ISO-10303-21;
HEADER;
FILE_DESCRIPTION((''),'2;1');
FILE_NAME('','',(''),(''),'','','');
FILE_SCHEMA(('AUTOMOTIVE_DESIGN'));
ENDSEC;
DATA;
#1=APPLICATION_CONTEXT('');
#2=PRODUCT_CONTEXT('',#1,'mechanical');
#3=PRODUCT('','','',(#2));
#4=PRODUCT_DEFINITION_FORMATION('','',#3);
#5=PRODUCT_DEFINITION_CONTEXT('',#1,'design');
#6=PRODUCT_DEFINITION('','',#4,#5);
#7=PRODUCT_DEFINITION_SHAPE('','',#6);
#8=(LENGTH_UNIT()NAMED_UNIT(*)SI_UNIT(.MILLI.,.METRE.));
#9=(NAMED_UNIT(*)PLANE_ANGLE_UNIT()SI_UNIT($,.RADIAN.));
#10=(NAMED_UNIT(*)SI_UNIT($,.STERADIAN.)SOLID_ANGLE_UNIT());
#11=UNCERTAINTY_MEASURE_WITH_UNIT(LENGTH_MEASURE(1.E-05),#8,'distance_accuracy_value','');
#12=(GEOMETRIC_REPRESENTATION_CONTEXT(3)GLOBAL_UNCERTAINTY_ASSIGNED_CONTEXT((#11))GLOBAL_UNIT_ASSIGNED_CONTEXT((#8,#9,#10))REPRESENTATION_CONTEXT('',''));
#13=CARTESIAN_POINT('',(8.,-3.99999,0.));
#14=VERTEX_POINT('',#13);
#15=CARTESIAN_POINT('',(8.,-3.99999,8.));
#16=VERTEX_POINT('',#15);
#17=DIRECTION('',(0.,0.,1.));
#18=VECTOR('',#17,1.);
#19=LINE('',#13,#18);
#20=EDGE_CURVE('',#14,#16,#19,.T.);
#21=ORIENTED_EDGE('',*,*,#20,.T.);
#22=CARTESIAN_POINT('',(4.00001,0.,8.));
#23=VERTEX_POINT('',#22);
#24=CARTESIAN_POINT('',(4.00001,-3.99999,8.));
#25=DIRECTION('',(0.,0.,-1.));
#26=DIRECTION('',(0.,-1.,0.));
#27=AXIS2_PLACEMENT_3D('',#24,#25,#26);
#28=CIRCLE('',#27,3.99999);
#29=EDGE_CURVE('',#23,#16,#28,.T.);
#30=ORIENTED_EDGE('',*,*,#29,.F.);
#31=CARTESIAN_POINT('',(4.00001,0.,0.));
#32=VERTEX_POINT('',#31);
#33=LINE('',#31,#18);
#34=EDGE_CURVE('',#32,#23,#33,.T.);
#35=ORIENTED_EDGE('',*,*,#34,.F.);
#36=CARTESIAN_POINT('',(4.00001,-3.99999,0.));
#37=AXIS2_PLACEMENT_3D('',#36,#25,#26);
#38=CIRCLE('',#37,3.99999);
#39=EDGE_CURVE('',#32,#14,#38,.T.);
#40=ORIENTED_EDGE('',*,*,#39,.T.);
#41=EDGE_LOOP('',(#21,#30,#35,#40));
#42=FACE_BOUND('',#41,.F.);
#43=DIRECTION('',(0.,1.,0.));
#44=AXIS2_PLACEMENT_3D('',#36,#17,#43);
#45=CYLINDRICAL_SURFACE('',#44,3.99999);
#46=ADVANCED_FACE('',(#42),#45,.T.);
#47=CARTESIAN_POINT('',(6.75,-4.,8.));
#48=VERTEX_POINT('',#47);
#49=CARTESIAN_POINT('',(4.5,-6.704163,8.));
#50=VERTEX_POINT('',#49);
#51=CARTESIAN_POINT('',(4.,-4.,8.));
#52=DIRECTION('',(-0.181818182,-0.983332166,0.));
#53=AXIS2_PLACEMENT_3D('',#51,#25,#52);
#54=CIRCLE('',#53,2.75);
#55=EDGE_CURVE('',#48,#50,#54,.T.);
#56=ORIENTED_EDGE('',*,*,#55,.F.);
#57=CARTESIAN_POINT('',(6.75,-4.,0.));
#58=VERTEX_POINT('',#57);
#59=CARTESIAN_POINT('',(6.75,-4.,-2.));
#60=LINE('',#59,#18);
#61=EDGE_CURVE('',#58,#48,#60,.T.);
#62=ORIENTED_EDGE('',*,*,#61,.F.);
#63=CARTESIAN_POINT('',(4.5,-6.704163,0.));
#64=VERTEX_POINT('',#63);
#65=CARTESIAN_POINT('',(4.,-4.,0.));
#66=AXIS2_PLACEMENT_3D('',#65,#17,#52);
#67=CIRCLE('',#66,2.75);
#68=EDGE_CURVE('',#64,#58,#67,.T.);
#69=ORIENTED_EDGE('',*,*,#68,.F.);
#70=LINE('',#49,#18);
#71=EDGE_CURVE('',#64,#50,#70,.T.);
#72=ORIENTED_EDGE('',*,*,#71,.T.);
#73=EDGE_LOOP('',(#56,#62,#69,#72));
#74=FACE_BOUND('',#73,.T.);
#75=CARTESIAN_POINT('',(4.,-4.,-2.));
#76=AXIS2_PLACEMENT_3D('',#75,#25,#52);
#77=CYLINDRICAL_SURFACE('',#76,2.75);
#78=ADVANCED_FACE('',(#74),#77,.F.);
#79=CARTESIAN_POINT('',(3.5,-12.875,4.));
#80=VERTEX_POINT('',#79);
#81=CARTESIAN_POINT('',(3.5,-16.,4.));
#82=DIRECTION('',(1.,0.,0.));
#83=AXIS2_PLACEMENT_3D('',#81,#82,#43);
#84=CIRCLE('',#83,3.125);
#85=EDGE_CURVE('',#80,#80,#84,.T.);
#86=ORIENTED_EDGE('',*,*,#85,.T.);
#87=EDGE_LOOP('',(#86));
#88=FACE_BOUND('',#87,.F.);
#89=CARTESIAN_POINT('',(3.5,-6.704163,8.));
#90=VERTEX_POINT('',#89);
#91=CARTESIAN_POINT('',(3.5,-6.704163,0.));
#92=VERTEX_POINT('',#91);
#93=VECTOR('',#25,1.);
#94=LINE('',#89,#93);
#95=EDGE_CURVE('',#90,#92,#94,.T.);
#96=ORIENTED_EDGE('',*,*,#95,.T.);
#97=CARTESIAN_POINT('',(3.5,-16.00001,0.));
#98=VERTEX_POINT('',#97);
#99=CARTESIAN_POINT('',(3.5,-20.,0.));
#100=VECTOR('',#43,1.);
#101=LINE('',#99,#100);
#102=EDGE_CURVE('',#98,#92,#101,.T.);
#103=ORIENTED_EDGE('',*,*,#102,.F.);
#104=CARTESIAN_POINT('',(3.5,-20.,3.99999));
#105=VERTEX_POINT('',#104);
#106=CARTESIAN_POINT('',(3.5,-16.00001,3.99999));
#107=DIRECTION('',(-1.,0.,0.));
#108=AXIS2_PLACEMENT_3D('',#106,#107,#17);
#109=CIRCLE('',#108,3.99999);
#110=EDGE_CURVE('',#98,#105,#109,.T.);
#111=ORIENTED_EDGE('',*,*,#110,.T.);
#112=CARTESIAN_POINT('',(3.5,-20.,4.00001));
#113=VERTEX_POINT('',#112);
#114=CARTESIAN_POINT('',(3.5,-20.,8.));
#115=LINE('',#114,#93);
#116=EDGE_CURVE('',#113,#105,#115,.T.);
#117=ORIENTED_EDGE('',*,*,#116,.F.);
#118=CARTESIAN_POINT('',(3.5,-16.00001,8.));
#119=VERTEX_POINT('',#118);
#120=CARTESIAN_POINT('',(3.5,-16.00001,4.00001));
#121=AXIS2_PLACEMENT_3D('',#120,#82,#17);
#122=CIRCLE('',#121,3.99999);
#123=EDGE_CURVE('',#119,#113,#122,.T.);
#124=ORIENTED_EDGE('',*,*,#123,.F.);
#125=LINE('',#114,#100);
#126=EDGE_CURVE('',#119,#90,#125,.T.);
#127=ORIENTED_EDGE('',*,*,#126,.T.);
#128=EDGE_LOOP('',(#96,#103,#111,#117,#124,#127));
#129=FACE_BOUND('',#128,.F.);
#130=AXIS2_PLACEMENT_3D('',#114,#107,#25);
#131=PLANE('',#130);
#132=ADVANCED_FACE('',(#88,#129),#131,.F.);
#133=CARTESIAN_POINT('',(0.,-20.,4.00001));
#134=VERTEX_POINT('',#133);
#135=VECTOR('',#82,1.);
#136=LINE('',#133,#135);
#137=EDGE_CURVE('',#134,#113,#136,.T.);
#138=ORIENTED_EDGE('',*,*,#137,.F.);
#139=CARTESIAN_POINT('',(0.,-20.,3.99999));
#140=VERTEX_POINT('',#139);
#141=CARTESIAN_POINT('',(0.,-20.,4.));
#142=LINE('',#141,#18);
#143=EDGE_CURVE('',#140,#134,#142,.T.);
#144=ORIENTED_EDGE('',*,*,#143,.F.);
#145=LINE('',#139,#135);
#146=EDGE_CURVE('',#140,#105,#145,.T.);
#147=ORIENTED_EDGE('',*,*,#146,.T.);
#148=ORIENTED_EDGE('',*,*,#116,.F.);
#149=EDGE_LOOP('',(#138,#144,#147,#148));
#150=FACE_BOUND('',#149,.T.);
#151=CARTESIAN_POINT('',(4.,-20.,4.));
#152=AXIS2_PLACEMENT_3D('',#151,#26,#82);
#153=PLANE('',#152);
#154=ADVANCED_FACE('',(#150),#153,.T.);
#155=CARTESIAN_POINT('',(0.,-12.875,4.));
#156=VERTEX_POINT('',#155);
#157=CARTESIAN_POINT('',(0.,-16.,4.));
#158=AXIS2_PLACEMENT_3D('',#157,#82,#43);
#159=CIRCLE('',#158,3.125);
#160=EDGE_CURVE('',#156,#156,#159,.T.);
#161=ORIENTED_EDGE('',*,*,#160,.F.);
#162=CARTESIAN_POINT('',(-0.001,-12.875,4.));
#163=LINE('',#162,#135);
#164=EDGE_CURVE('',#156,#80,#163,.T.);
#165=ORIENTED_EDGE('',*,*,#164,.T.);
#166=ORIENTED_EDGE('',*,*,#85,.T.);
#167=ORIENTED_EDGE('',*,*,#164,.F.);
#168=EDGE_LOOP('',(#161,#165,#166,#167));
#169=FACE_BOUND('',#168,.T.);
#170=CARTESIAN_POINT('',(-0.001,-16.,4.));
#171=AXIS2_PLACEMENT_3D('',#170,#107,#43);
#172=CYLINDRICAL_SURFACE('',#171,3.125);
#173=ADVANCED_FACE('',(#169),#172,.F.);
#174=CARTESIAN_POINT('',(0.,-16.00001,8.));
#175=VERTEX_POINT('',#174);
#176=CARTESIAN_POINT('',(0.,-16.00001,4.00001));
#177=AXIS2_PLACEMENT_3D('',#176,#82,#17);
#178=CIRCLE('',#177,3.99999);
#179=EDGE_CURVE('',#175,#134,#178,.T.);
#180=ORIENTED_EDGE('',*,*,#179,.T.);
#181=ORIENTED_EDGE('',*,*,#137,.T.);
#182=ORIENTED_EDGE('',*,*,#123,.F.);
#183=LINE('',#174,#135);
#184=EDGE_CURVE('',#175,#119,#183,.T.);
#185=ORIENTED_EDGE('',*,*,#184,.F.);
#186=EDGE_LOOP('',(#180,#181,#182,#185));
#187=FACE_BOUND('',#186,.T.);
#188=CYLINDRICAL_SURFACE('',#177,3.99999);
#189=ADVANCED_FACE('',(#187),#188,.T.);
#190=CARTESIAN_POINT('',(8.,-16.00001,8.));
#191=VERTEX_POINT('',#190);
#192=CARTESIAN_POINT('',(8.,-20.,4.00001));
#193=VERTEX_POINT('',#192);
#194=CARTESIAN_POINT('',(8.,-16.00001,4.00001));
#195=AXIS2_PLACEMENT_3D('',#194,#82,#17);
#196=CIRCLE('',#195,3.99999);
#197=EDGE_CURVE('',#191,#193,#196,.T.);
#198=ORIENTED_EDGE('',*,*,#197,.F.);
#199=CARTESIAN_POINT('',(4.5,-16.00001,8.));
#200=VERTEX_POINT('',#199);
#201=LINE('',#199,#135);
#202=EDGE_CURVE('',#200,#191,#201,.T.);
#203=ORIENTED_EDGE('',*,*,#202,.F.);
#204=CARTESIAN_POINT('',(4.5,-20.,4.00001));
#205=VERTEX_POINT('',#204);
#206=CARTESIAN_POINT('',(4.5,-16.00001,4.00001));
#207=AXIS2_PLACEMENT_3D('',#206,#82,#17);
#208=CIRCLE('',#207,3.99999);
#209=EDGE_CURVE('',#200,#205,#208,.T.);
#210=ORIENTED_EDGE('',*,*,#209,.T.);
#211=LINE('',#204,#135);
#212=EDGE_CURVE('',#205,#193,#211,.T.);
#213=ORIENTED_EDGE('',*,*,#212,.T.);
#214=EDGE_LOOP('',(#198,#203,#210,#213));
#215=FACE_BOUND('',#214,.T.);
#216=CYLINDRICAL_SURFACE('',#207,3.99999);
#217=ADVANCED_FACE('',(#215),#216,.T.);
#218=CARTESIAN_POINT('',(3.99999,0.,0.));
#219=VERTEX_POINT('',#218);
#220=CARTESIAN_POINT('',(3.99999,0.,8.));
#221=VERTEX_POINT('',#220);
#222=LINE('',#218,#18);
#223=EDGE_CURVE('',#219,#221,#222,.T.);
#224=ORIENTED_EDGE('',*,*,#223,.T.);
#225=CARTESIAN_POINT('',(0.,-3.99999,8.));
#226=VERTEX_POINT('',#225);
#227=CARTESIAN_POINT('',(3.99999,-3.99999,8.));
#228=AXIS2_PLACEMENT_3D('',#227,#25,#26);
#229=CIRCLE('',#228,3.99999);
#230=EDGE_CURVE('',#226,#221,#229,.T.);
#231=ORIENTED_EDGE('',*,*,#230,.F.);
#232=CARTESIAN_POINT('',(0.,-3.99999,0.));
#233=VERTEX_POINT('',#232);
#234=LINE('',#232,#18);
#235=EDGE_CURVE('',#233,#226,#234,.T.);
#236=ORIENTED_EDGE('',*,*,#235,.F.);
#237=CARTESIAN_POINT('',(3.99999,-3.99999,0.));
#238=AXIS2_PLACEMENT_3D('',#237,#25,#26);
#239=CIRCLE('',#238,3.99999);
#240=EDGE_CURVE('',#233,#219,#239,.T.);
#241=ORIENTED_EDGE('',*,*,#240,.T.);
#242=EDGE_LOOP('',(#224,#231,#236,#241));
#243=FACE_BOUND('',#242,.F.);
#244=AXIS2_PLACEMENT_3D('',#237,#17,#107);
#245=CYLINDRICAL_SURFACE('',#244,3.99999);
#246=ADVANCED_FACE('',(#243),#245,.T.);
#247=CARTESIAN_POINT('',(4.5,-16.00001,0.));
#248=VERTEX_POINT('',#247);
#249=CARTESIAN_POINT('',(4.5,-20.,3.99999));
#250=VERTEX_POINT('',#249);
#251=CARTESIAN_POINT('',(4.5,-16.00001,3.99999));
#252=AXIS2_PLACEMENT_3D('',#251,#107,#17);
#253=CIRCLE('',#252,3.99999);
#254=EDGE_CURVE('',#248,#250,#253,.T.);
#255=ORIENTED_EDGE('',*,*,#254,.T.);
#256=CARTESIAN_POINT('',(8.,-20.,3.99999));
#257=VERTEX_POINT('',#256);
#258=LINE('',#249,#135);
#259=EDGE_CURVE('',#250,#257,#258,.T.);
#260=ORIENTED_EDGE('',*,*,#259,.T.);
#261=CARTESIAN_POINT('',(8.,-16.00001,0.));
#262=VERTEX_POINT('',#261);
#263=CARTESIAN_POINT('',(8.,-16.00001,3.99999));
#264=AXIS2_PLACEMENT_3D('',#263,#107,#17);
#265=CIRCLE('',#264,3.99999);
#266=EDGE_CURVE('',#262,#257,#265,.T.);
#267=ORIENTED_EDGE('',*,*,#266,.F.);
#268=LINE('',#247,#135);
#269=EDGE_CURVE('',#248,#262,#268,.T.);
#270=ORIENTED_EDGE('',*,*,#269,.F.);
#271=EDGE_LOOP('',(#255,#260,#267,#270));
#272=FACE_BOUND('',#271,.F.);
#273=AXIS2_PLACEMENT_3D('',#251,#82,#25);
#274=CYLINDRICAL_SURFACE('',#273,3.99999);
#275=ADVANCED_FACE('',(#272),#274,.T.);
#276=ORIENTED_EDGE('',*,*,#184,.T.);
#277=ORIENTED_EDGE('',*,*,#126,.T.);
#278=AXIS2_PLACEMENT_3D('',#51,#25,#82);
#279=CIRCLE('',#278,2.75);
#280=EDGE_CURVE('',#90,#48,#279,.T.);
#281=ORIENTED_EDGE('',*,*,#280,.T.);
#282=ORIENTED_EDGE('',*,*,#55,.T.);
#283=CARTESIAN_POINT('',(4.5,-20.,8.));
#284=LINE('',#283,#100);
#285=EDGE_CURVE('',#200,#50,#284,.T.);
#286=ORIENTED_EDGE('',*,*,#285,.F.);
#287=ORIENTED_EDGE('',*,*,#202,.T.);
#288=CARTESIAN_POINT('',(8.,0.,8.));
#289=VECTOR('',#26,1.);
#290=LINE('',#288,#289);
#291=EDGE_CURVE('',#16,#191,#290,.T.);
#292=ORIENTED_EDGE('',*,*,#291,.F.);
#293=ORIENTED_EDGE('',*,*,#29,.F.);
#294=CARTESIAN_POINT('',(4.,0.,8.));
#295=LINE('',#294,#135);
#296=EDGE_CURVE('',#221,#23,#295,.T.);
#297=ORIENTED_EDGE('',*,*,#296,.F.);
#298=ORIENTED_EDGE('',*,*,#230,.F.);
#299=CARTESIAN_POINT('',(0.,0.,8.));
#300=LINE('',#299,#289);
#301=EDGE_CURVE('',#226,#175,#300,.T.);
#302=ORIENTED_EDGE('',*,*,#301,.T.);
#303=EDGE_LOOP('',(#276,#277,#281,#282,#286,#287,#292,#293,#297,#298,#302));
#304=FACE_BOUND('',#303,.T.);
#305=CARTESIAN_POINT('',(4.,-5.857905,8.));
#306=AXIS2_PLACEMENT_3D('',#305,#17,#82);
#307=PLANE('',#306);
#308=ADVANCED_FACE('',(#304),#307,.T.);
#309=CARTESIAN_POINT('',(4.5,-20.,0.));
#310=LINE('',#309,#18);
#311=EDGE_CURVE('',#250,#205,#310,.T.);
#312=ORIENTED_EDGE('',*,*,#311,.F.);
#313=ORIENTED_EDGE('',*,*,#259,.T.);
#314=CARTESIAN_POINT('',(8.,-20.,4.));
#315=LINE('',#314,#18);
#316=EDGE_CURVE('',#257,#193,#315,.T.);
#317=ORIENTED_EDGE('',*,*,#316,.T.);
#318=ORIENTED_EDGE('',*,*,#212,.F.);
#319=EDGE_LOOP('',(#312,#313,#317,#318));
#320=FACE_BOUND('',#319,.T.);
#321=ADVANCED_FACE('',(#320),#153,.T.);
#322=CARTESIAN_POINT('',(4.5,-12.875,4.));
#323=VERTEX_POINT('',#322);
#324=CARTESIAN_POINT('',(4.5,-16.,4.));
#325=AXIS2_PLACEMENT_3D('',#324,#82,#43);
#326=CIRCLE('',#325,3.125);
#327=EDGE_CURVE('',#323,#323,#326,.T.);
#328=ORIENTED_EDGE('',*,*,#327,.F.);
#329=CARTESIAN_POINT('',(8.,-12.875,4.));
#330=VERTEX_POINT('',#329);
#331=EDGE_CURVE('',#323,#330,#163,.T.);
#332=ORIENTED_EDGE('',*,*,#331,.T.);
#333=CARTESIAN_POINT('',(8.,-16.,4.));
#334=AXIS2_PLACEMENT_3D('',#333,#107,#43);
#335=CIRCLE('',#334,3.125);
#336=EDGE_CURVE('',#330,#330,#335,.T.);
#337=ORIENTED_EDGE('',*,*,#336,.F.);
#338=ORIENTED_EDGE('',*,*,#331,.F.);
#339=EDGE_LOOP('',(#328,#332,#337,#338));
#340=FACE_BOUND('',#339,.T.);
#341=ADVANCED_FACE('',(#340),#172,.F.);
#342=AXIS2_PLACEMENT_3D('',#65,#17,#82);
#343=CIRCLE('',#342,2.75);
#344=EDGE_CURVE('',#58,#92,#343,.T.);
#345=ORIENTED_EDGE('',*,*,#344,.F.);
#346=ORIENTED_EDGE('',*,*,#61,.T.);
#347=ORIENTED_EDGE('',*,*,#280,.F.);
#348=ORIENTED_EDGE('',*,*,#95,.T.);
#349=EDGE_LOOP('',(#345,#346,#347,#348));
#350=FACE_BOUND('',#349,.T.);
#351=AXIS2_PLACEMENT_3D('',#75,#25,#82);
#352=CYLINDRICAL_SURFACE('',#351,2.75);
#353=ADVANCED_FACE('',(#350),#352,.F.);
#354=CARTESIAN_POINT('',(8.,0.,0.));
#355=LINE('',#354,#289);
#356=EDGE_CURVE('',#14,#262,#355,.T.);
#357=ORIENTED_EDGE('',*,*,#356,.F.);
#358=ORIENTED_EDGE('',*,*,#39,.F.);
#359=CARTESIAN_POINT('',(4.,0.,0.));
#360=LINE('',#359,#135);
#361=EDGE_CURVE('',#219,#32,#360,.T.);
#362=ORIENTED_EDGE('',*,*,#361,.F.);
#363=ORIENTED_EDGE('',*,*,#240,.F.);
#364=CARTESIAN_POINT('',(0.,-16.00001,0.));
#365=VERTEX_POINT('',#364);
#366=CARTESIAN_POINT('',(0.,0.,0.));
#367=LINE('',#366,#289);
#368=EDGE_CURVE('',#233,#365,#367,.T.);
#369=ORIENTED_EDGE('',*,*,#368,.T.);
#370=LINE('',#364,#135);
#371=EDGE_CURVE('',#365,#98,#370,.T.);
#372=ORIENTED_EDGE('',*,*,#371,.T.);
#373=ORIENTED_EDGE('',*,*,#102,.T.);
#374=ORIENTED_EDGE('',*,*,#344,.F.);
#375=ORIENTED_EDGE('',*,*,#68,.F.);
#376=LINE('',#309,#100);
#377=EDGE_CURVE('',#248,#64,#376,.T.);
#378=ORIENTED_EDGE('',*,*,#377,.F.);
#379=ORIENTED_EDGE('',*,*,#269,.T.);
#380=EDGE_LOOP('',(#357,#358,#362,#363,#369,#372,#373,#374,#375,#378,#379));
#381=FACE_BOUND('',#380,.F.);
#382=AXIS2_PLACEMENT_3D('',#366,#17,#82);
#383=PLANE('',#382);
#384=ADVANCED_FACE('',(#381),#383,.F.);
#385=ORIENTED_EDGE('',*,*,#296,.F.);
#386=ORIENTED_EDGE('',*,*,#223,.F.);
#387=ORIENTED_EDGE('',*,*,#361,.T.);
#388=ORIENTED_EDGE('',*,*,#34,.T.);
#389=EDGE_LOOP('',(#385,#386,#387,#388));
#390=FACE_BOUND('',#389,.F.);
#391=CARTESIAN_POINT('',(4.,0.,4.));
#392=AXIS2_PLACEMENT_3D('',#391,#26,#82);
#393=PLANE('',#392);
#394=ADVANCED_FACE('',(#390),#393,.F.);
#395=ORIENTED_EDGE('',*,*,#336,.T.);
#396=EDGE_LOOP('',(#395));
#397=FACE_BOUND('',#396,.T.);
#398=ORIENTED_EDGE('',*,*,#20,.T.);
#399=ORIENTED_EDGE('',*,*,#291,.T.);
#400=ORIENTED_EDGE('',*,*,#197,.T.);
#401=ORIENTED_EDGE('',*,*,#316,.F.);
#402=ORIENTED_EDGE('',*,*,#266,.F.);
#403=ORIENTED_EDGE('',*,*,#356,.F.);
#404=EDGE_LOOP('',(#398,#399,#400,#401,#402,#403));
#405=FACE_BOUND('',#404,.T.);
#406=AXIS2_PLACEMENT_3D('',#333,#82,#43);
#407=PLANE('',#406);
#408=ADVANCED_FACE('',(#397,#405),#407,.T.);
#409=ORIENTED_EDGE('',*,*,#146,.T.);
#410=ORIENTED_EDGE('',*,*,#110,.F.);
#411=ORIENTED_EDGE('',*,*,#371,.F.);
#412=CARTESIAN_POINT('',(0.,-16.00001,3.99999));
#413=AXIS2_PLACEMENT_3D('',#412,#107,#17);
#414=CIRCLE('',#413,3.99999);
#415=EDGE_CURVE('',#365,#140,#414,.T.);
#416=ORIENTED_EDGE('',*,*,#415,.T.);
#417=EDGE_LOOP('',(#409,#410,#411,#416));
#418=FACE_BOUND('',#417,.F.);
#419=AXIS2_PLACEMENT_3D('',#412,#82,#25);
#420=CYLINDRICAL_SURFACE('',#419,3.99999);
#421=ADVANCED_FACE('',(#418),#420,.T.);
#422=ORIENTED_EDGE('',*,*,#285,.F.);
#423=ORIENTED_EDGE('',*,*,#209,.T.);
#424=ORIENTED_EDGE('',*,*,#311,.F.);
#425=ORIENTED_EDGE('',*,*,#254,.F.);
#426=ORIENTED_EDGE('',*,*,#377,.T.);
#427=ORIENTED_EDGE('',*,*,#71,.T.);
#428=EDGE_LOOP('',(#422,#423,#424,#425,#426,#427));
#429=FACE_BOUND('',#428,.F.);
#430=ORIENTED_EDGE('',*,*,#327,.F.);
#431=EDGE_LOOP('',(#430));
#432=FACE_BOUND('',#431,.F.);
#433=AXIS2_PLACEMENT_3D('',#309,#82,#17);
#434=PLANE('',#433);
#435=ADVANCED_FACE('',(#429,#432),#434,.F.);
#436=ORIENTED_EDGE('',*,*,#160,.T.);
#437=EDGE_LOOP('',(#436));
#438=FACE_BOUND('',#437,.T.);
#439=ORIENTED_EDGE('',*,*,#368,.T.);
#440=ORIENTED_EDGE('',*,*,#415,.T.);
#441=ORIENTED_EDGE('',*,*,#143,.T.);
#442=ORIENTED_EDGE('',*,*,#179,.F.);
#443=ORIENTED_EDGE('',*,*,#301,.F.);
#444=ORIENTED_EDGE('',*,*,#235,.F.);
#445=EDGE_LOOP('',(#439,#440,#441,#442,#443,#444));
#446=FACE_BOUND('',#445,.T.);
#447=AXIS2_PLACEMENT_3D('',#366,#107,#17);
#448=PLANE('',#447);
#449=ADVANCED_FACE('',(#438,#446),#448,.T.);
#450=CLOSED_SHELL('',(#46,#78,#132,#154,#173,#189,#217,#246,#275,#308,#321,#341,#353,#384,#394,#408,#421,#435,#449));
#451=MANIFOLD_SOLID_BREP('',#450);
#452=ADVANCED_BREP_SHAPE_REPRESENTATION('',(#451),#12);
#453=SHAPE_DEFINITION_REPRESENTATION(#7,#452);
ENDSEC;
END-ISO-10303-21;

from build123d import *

# Parameters (mm, degrees)
F0_W      = 8
F0_H      = 8
F1_DEPTH  = 20
F3_DEPTH  = 15
F4_R      = 3.99999
F6_DEPTH  = 10
F7_R      = 3.125
F8_DEPTH  = 8.001
F9_DEPTH  = 25
F10_DEPTH = 27


# Not quite as in the source:
# - a fillet or chamfer is up to 0.001 mm smaller than in the source, because OpenCascade refuses the exact size


with BuildPart() as f1:
    # F0 (on Front) → F1 (new body)
    with BuildSketch(Plane.XZ):
        with Locations((4, 4)):
            Rectangle(F0_W, F0_H)
    extrude(amount=F1_DEPTH)

    # F2 (on face) → F3 (cut)
    with BuildSketch(Plane.XZ.offset(20)):
        Polygon((4.5, 8), (4, 8), (3.5, 8), (3.5, 0), (4.5, 0), align=None)
    extrude(amount=-F3_DEPTH, mode=Mode.SUBTRACT)

    # F4 (radius 4 in the source; OpenCascade refuses exactly that, so slightly less here)
    f4_edges = [f1.edges().sort_by_distance(p)[0] for p in [
        (1.75, -20, 8),
        (6.25, -20, 8),
        (6.25, -20, 0),
        (1.75, -20, 0),
        (8, 0, 4),
        (0, 0, 4),
    ]]
    fillet(f4_edges, radius=F4_R)

    # F5 (on face) → F6 (join)
    with BuildSketch(Plane.XY.offset(8)):
        with BuildLine():
            Line((3.5, -5), (3.5, -6.7041634566))
            ThreePointArc((3.5, -6.7041634566), (4, -6.75), (4.5, -6.7041634566))
            Line((4.5, -6.7041634566), (4.5, -5))
            Line((4.5, -5), (3.5, -5))
        make_face()
        with BuildLine():
            ThreePointArc((4.5, -6.7041634566), (6.1139418157, -5.7589059099), (6.75, -4))
            ThreePointArc((6.75, -4), (2.2410940901, -1.8860581843), (3.5, -6.7041634566))
            Line((3.5, -6.7041634566), (3.5, -5))
            Line((3.5, -5), (4.5, -5))
            Line((4.5, -5), (4.5, -6.7041634566))
        make_face()
    extrude(amount=-F6_DEPTH)

    # F7 (on face) → F8 (join, through all)
    with BuildSketch(Plane.YZ.offset(8)):
        with Locations((-16, 4)):
            Circle(F7_R)
    extrude(amount=-F8_DEPTH)

    # F9 (cut): a face of the model
    f9_faces = [f1.faces().sort_by_distance(p)[0] for p in [
        (4, -4, -2),
    ]]
    extrude(f9_faces, amount=-F9_DEPTH, mode=Mode.SUBTRACT)

    # F10 (cut): a face of the model
    f10_faces = [f1.faces().sort_by_distance(p)[0] for p in [
        (-0.001, -16, 4),
    ]]
    extrude(f10_faces, amount=-F10_DEPTH, mode=Mode.SUBTRACT)


solid = f1.part
